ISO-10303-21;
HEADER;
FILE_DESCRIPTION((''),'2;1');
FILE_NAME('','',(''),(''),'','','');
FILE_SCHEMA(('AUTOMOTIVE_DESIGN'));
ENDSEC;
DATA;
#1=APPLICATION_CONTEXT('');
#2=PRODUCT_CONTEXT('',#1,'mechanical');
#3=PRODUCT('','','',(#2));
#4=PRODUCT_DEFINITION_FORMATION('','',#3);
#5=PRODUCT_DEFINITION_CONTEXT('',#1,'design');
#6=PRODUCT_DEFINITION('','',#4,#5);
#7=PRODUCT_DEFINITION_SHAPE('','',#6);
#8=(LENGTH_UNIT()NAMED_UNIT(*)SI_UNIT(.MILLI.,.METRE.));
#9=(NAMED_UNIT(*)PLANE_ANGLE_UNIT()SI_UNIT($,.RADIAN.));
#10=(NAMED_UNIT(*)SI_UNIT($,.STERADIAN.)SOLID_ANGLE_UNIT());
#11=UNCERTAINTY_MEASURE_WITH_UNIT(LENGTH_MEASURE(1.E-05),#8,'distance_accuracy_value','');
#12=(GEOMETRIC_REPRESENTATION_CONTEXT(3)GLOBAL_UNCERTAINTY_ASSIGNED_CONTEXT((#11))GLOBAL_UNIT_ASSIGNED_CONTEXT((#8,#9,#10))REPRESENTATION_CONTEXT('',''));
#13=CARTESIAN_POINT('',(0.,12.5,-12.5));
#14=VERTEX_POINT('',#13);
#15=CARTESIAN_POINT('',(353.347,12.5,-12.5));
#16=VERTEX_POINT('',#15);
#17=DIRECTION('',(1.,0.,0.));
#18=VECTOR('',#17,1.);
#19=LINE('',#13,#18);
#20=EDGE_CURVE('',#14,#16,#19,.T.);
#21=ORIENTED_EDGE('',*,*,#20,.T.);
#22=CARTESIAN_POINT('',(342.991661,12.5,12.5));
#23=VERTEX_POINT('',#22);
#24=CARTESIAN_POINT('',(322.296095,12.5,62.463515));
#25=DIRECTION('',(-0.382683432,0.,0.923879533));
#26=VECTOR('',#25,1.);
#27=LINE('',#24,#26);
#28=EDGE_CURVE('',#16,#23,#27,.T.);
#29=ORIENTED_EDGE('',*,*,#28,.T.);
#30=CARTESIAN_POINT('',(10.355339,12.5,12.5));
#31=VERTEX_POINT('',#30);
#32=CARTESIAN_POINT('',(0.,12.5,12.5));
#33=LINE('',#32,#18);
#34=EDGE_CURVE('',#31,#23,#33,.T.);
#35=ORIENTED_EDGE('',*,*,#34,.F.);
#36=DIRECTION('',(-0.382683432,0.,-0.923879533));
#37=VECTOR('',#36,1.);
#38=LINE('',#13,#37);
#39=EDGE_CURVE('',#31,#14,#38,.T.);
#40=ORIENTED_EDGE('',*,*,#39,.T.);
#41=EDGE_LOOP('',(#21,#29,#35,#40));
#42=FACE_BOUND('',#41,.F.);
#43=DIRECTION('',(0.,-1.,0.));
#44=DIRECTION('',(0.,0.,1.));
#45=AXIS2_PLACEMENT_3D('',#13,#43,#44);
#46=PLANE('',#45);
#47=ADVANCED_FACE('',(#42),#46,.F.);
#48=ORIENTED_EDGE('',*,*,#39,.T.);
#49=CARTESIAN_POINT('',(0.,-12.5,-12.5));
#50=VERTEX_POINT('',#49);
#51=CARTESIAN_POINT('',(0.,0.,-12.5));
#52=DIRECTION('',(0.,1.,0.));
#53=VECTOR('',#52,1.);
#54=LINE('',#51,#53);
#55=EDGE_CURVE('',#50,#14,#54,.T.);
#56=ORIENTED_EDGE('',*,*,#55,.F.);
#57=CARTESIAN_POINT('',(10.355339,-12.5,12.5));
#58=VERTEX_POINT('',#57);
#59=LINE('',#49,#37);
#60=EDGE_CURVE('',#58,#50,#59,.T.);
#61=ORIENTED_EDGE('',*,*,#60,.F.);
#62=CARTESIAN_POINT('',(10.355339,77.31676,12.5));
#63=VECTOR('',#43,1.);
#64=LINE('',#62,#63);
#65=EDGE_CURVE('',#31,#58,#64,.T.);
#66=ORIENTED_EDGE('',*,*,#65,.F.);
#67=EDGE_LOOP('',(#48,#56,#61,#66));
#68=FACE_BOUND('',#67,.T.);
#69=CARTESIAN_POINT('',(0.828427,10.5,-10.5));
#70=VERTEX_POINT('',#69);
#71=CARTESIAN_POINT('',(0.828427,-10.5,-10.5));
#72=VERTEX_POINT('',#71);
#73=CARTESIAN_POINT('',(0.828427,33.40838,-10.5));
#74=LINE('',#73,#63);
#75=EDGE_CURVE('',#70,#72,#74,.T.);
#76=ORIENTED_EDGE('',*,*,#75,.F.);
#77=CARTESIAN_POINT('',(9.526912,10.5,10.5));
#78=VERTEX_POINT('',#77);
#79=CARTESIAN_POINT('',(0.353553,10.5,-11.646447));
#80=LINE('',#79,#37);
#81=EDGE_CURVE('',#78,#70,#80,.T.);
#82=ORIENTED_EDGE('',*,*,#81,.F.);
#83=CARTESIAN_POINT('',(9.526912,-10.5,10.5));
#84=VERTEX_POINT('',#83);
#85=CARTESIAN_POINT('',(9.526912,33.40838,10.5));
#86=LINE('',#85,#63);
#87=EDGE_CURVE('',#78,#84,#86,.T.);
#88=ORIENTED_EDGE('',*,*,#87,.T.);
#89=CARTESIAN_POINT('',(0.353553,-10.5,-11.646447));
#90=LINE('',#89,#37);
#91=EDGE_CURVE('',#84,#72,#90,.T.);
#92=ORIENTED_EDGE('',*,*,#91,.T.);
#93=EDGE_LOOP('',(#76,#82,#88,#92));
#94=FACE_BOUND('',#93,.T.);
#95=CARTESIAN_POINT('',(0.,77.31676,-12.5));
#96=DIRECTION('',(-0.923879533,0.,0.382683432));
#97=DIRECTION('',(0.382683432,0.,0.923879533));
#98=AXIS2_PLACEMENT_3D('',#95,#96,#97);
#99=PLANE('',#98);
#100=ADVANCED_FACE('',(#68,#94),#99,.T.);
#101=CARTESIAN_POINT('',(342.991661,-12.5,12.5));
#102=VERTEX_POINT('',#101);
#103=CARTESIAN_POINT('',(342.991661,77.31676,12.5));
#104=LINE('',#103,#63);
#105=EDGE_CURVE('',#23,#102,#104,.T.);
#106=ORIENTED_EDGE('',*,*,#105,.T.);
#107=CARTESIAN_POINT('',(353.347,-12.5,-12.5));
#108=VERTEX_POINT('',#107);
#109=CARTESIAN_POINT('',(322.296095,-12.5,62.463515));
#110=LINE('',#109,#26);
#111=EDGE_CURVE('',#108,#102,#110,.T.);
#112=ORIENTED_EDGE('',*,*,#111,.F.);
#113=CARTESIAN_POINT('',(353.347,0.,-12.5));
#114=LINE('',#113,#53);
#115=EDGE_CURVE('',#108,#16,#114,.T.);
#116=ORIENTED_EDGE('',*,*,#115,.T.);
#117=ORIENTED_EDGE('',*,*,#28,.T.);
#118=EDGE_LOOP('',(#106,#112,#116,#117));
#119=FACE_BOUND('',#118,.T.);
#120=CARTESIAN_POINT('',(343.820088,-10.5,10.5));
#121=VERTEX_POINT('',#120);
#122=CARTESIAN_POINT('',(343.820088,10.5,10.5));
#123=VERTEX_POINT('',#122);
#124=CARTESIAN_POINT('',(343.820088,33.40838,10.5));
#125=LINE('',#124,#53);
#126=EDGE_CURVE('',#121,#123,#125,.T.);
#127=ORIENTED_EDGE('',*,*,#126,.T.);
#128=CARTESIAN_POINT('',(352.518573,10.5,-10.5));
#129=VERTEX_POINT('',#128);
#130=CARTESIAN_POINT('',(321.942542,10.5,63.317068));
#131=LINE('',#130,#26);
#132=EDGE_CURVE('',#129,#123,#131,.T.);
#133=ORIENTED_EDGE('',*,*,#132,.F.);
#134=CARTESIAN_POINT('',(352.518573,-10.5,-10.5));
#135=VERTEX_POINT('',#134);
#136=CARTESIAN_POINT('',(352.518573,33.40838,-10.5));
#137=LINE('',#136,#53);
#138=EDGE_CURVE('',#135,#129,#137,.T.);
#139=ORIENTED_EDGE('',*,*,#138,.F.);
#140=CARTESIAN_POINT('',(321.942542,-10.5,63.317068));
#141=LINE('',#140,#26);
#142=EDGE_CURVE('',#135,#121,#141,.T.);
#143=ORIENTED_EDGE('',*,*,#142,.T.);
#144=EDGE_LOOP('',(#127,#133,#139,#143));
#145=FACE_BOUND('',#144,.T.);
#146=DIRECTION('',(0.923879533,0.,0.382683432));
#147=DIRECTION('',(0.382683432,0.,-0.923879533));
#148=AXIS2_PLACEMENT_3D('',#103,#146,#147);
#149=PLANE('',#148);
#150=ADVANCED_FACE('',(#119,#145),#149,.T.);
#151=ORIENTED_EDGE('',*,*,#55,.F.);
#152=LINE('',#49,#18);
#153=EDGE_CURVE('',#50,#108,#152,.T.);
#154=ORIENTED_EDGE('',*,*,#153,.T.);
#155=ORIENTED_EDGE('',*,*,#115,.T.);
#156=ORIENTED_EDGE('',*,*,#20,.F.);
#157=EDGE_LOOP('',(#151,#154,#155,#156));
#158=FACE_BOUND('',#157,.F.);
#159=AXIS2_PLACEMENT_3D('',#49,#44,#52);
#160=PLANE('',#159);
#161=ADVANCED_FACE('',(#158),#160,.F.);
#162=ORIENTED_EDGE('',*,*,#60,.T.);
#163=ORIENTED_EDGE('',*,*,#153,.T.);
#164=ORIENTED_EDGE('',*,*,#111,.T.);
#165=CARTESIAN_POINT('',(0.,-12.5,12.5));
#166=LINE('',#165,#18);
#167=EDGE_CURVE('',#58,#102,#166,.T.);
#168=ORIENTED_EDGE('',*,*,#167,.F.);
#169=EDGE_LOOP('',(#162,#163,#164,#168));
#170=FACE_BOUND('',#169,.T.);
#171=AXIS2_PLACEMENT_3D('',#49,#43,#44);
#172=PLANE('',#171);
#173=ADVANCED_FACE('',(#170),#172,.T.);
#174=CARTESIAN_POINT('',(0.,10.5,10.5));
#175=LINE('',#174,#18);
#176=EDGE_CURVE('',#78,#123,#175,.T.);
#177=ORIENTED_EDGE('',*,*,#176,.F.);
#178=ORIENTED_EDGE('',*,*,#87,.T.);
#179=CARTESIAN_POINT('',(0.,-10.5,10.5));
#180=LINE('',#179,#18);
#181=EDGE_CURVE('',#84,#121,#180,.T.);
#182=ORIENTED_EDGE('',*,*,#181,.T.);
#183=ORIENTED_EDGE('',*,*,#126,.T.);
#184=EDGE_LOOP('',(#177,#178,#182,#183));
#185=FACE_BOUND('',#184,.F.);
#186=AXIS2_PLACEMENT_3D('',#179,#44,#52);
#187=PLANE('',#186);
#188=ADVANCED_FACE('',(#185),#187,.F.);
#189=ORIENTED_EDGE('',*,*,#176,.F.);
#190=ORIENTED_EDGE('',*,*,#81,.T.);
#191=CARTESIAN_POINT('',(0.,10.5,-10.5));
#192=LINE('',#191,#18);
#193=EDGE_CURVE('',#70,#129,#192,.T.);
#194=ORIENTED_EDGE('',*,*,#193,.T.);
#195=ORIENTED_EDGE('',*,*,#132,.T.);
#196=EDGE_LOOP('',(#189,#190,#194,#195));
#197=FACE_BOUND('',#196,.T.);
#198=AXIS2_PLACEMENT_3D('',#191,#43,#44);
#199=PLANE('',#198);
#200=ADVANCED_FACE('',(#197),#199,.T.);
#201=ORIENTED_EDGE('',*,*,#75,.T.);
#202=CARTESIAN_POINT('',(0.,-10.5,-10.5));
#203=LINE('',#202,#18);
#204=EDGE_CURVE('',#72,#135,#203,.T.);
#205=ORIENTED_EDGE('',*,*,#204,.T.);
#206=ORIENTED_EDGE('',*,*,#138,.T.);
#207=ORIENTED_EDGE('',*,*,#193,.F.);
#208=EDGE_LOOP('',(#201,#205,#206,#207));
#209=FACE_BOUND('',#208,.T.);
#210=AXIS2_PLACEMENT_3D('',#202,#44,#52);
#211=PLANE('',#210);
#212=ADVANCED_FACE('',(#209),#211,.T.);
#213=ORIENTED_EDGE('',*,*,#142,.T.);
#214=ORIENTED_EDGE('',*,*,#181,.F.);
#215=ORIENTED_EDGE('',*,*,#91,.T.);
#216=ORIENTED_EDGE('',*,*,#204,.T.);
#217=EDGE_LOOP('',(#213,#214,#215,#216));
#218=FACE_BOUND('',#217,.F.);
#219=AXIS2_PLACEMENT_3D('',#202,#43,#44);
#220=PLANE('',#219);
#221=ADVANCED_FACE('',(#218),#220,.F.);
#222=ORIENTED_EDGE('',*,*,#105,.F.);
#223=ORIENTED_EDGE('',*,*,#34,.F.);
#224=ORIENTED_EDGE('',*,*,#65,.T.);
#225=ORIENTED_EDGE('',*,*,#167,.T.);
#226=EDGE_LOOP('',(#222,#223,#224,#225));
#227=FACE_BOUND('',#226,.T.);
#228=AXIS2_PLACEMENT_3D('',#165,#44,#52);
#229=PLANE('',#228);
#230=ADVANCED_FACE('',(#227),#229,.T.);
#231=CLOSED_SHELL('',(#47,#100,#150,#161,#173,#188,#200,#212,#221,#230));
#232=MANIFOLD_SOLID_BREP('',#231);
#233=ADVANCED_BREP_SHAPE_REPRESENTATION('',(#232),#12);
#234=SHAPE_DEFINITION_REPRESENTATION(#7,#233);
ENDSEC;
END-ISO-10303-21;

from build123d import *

# Parameters (mm, degrees)
F0_W        = 25
F0_H        = 25
F0_W_2      = 21
F0_H_2      = 21
F1_DEPTH    = 353.347
F2_T1_DEPTH = 154.6335196453
F3_T1_DEPTH = 154.6335196453


# Not quite as in the source:
# - a fillet or chamfer that OpenCascade refuses, or shapes differently, is made with other operations: its cross-section is extruded or revolved along the edge and cut away or added


with BuildPart() as f1:
    # F0 (on Right) → F1 (new body)
    with BuildSketch(Plane.YZ):
        Rectangle(F0_W, F0_H)
        Rectangle(F0_W_2, F0_H_2, mode=Mode.SUBTRACT)
    extrude(amount=F1_DEPTH)

    # F2: chamfer of 25 x 10.3553390593 on 1 edges, made by hand

    # F2_s2 → F2_t1 (cut)
    with BuildSketch(Plane.XZ.offset(-77.3167598227)):
        Polygon((342.9916609407, 12.5), (353.347, -12.5), (353.347, 12.5), align=None)
    extrude(amount=F2_T1_DEPTH, mode=Mode.SUBTRACT)

    # F3: chamfer of 25 x 10.3553390593 on 1 edges, made by hand

    # F3_s2 → F3_t1 (cut)
    with BuildSketch(Plane.XZ.offset(-77.3167598227)):
        Polygon((0, -12.5), (10.3553390593, 12.5), (0, 12.5), align=None)
    extrude(amount=F3_T1_DEPTH, mode=Mode.SUBTRACT)


solid = f1.part
